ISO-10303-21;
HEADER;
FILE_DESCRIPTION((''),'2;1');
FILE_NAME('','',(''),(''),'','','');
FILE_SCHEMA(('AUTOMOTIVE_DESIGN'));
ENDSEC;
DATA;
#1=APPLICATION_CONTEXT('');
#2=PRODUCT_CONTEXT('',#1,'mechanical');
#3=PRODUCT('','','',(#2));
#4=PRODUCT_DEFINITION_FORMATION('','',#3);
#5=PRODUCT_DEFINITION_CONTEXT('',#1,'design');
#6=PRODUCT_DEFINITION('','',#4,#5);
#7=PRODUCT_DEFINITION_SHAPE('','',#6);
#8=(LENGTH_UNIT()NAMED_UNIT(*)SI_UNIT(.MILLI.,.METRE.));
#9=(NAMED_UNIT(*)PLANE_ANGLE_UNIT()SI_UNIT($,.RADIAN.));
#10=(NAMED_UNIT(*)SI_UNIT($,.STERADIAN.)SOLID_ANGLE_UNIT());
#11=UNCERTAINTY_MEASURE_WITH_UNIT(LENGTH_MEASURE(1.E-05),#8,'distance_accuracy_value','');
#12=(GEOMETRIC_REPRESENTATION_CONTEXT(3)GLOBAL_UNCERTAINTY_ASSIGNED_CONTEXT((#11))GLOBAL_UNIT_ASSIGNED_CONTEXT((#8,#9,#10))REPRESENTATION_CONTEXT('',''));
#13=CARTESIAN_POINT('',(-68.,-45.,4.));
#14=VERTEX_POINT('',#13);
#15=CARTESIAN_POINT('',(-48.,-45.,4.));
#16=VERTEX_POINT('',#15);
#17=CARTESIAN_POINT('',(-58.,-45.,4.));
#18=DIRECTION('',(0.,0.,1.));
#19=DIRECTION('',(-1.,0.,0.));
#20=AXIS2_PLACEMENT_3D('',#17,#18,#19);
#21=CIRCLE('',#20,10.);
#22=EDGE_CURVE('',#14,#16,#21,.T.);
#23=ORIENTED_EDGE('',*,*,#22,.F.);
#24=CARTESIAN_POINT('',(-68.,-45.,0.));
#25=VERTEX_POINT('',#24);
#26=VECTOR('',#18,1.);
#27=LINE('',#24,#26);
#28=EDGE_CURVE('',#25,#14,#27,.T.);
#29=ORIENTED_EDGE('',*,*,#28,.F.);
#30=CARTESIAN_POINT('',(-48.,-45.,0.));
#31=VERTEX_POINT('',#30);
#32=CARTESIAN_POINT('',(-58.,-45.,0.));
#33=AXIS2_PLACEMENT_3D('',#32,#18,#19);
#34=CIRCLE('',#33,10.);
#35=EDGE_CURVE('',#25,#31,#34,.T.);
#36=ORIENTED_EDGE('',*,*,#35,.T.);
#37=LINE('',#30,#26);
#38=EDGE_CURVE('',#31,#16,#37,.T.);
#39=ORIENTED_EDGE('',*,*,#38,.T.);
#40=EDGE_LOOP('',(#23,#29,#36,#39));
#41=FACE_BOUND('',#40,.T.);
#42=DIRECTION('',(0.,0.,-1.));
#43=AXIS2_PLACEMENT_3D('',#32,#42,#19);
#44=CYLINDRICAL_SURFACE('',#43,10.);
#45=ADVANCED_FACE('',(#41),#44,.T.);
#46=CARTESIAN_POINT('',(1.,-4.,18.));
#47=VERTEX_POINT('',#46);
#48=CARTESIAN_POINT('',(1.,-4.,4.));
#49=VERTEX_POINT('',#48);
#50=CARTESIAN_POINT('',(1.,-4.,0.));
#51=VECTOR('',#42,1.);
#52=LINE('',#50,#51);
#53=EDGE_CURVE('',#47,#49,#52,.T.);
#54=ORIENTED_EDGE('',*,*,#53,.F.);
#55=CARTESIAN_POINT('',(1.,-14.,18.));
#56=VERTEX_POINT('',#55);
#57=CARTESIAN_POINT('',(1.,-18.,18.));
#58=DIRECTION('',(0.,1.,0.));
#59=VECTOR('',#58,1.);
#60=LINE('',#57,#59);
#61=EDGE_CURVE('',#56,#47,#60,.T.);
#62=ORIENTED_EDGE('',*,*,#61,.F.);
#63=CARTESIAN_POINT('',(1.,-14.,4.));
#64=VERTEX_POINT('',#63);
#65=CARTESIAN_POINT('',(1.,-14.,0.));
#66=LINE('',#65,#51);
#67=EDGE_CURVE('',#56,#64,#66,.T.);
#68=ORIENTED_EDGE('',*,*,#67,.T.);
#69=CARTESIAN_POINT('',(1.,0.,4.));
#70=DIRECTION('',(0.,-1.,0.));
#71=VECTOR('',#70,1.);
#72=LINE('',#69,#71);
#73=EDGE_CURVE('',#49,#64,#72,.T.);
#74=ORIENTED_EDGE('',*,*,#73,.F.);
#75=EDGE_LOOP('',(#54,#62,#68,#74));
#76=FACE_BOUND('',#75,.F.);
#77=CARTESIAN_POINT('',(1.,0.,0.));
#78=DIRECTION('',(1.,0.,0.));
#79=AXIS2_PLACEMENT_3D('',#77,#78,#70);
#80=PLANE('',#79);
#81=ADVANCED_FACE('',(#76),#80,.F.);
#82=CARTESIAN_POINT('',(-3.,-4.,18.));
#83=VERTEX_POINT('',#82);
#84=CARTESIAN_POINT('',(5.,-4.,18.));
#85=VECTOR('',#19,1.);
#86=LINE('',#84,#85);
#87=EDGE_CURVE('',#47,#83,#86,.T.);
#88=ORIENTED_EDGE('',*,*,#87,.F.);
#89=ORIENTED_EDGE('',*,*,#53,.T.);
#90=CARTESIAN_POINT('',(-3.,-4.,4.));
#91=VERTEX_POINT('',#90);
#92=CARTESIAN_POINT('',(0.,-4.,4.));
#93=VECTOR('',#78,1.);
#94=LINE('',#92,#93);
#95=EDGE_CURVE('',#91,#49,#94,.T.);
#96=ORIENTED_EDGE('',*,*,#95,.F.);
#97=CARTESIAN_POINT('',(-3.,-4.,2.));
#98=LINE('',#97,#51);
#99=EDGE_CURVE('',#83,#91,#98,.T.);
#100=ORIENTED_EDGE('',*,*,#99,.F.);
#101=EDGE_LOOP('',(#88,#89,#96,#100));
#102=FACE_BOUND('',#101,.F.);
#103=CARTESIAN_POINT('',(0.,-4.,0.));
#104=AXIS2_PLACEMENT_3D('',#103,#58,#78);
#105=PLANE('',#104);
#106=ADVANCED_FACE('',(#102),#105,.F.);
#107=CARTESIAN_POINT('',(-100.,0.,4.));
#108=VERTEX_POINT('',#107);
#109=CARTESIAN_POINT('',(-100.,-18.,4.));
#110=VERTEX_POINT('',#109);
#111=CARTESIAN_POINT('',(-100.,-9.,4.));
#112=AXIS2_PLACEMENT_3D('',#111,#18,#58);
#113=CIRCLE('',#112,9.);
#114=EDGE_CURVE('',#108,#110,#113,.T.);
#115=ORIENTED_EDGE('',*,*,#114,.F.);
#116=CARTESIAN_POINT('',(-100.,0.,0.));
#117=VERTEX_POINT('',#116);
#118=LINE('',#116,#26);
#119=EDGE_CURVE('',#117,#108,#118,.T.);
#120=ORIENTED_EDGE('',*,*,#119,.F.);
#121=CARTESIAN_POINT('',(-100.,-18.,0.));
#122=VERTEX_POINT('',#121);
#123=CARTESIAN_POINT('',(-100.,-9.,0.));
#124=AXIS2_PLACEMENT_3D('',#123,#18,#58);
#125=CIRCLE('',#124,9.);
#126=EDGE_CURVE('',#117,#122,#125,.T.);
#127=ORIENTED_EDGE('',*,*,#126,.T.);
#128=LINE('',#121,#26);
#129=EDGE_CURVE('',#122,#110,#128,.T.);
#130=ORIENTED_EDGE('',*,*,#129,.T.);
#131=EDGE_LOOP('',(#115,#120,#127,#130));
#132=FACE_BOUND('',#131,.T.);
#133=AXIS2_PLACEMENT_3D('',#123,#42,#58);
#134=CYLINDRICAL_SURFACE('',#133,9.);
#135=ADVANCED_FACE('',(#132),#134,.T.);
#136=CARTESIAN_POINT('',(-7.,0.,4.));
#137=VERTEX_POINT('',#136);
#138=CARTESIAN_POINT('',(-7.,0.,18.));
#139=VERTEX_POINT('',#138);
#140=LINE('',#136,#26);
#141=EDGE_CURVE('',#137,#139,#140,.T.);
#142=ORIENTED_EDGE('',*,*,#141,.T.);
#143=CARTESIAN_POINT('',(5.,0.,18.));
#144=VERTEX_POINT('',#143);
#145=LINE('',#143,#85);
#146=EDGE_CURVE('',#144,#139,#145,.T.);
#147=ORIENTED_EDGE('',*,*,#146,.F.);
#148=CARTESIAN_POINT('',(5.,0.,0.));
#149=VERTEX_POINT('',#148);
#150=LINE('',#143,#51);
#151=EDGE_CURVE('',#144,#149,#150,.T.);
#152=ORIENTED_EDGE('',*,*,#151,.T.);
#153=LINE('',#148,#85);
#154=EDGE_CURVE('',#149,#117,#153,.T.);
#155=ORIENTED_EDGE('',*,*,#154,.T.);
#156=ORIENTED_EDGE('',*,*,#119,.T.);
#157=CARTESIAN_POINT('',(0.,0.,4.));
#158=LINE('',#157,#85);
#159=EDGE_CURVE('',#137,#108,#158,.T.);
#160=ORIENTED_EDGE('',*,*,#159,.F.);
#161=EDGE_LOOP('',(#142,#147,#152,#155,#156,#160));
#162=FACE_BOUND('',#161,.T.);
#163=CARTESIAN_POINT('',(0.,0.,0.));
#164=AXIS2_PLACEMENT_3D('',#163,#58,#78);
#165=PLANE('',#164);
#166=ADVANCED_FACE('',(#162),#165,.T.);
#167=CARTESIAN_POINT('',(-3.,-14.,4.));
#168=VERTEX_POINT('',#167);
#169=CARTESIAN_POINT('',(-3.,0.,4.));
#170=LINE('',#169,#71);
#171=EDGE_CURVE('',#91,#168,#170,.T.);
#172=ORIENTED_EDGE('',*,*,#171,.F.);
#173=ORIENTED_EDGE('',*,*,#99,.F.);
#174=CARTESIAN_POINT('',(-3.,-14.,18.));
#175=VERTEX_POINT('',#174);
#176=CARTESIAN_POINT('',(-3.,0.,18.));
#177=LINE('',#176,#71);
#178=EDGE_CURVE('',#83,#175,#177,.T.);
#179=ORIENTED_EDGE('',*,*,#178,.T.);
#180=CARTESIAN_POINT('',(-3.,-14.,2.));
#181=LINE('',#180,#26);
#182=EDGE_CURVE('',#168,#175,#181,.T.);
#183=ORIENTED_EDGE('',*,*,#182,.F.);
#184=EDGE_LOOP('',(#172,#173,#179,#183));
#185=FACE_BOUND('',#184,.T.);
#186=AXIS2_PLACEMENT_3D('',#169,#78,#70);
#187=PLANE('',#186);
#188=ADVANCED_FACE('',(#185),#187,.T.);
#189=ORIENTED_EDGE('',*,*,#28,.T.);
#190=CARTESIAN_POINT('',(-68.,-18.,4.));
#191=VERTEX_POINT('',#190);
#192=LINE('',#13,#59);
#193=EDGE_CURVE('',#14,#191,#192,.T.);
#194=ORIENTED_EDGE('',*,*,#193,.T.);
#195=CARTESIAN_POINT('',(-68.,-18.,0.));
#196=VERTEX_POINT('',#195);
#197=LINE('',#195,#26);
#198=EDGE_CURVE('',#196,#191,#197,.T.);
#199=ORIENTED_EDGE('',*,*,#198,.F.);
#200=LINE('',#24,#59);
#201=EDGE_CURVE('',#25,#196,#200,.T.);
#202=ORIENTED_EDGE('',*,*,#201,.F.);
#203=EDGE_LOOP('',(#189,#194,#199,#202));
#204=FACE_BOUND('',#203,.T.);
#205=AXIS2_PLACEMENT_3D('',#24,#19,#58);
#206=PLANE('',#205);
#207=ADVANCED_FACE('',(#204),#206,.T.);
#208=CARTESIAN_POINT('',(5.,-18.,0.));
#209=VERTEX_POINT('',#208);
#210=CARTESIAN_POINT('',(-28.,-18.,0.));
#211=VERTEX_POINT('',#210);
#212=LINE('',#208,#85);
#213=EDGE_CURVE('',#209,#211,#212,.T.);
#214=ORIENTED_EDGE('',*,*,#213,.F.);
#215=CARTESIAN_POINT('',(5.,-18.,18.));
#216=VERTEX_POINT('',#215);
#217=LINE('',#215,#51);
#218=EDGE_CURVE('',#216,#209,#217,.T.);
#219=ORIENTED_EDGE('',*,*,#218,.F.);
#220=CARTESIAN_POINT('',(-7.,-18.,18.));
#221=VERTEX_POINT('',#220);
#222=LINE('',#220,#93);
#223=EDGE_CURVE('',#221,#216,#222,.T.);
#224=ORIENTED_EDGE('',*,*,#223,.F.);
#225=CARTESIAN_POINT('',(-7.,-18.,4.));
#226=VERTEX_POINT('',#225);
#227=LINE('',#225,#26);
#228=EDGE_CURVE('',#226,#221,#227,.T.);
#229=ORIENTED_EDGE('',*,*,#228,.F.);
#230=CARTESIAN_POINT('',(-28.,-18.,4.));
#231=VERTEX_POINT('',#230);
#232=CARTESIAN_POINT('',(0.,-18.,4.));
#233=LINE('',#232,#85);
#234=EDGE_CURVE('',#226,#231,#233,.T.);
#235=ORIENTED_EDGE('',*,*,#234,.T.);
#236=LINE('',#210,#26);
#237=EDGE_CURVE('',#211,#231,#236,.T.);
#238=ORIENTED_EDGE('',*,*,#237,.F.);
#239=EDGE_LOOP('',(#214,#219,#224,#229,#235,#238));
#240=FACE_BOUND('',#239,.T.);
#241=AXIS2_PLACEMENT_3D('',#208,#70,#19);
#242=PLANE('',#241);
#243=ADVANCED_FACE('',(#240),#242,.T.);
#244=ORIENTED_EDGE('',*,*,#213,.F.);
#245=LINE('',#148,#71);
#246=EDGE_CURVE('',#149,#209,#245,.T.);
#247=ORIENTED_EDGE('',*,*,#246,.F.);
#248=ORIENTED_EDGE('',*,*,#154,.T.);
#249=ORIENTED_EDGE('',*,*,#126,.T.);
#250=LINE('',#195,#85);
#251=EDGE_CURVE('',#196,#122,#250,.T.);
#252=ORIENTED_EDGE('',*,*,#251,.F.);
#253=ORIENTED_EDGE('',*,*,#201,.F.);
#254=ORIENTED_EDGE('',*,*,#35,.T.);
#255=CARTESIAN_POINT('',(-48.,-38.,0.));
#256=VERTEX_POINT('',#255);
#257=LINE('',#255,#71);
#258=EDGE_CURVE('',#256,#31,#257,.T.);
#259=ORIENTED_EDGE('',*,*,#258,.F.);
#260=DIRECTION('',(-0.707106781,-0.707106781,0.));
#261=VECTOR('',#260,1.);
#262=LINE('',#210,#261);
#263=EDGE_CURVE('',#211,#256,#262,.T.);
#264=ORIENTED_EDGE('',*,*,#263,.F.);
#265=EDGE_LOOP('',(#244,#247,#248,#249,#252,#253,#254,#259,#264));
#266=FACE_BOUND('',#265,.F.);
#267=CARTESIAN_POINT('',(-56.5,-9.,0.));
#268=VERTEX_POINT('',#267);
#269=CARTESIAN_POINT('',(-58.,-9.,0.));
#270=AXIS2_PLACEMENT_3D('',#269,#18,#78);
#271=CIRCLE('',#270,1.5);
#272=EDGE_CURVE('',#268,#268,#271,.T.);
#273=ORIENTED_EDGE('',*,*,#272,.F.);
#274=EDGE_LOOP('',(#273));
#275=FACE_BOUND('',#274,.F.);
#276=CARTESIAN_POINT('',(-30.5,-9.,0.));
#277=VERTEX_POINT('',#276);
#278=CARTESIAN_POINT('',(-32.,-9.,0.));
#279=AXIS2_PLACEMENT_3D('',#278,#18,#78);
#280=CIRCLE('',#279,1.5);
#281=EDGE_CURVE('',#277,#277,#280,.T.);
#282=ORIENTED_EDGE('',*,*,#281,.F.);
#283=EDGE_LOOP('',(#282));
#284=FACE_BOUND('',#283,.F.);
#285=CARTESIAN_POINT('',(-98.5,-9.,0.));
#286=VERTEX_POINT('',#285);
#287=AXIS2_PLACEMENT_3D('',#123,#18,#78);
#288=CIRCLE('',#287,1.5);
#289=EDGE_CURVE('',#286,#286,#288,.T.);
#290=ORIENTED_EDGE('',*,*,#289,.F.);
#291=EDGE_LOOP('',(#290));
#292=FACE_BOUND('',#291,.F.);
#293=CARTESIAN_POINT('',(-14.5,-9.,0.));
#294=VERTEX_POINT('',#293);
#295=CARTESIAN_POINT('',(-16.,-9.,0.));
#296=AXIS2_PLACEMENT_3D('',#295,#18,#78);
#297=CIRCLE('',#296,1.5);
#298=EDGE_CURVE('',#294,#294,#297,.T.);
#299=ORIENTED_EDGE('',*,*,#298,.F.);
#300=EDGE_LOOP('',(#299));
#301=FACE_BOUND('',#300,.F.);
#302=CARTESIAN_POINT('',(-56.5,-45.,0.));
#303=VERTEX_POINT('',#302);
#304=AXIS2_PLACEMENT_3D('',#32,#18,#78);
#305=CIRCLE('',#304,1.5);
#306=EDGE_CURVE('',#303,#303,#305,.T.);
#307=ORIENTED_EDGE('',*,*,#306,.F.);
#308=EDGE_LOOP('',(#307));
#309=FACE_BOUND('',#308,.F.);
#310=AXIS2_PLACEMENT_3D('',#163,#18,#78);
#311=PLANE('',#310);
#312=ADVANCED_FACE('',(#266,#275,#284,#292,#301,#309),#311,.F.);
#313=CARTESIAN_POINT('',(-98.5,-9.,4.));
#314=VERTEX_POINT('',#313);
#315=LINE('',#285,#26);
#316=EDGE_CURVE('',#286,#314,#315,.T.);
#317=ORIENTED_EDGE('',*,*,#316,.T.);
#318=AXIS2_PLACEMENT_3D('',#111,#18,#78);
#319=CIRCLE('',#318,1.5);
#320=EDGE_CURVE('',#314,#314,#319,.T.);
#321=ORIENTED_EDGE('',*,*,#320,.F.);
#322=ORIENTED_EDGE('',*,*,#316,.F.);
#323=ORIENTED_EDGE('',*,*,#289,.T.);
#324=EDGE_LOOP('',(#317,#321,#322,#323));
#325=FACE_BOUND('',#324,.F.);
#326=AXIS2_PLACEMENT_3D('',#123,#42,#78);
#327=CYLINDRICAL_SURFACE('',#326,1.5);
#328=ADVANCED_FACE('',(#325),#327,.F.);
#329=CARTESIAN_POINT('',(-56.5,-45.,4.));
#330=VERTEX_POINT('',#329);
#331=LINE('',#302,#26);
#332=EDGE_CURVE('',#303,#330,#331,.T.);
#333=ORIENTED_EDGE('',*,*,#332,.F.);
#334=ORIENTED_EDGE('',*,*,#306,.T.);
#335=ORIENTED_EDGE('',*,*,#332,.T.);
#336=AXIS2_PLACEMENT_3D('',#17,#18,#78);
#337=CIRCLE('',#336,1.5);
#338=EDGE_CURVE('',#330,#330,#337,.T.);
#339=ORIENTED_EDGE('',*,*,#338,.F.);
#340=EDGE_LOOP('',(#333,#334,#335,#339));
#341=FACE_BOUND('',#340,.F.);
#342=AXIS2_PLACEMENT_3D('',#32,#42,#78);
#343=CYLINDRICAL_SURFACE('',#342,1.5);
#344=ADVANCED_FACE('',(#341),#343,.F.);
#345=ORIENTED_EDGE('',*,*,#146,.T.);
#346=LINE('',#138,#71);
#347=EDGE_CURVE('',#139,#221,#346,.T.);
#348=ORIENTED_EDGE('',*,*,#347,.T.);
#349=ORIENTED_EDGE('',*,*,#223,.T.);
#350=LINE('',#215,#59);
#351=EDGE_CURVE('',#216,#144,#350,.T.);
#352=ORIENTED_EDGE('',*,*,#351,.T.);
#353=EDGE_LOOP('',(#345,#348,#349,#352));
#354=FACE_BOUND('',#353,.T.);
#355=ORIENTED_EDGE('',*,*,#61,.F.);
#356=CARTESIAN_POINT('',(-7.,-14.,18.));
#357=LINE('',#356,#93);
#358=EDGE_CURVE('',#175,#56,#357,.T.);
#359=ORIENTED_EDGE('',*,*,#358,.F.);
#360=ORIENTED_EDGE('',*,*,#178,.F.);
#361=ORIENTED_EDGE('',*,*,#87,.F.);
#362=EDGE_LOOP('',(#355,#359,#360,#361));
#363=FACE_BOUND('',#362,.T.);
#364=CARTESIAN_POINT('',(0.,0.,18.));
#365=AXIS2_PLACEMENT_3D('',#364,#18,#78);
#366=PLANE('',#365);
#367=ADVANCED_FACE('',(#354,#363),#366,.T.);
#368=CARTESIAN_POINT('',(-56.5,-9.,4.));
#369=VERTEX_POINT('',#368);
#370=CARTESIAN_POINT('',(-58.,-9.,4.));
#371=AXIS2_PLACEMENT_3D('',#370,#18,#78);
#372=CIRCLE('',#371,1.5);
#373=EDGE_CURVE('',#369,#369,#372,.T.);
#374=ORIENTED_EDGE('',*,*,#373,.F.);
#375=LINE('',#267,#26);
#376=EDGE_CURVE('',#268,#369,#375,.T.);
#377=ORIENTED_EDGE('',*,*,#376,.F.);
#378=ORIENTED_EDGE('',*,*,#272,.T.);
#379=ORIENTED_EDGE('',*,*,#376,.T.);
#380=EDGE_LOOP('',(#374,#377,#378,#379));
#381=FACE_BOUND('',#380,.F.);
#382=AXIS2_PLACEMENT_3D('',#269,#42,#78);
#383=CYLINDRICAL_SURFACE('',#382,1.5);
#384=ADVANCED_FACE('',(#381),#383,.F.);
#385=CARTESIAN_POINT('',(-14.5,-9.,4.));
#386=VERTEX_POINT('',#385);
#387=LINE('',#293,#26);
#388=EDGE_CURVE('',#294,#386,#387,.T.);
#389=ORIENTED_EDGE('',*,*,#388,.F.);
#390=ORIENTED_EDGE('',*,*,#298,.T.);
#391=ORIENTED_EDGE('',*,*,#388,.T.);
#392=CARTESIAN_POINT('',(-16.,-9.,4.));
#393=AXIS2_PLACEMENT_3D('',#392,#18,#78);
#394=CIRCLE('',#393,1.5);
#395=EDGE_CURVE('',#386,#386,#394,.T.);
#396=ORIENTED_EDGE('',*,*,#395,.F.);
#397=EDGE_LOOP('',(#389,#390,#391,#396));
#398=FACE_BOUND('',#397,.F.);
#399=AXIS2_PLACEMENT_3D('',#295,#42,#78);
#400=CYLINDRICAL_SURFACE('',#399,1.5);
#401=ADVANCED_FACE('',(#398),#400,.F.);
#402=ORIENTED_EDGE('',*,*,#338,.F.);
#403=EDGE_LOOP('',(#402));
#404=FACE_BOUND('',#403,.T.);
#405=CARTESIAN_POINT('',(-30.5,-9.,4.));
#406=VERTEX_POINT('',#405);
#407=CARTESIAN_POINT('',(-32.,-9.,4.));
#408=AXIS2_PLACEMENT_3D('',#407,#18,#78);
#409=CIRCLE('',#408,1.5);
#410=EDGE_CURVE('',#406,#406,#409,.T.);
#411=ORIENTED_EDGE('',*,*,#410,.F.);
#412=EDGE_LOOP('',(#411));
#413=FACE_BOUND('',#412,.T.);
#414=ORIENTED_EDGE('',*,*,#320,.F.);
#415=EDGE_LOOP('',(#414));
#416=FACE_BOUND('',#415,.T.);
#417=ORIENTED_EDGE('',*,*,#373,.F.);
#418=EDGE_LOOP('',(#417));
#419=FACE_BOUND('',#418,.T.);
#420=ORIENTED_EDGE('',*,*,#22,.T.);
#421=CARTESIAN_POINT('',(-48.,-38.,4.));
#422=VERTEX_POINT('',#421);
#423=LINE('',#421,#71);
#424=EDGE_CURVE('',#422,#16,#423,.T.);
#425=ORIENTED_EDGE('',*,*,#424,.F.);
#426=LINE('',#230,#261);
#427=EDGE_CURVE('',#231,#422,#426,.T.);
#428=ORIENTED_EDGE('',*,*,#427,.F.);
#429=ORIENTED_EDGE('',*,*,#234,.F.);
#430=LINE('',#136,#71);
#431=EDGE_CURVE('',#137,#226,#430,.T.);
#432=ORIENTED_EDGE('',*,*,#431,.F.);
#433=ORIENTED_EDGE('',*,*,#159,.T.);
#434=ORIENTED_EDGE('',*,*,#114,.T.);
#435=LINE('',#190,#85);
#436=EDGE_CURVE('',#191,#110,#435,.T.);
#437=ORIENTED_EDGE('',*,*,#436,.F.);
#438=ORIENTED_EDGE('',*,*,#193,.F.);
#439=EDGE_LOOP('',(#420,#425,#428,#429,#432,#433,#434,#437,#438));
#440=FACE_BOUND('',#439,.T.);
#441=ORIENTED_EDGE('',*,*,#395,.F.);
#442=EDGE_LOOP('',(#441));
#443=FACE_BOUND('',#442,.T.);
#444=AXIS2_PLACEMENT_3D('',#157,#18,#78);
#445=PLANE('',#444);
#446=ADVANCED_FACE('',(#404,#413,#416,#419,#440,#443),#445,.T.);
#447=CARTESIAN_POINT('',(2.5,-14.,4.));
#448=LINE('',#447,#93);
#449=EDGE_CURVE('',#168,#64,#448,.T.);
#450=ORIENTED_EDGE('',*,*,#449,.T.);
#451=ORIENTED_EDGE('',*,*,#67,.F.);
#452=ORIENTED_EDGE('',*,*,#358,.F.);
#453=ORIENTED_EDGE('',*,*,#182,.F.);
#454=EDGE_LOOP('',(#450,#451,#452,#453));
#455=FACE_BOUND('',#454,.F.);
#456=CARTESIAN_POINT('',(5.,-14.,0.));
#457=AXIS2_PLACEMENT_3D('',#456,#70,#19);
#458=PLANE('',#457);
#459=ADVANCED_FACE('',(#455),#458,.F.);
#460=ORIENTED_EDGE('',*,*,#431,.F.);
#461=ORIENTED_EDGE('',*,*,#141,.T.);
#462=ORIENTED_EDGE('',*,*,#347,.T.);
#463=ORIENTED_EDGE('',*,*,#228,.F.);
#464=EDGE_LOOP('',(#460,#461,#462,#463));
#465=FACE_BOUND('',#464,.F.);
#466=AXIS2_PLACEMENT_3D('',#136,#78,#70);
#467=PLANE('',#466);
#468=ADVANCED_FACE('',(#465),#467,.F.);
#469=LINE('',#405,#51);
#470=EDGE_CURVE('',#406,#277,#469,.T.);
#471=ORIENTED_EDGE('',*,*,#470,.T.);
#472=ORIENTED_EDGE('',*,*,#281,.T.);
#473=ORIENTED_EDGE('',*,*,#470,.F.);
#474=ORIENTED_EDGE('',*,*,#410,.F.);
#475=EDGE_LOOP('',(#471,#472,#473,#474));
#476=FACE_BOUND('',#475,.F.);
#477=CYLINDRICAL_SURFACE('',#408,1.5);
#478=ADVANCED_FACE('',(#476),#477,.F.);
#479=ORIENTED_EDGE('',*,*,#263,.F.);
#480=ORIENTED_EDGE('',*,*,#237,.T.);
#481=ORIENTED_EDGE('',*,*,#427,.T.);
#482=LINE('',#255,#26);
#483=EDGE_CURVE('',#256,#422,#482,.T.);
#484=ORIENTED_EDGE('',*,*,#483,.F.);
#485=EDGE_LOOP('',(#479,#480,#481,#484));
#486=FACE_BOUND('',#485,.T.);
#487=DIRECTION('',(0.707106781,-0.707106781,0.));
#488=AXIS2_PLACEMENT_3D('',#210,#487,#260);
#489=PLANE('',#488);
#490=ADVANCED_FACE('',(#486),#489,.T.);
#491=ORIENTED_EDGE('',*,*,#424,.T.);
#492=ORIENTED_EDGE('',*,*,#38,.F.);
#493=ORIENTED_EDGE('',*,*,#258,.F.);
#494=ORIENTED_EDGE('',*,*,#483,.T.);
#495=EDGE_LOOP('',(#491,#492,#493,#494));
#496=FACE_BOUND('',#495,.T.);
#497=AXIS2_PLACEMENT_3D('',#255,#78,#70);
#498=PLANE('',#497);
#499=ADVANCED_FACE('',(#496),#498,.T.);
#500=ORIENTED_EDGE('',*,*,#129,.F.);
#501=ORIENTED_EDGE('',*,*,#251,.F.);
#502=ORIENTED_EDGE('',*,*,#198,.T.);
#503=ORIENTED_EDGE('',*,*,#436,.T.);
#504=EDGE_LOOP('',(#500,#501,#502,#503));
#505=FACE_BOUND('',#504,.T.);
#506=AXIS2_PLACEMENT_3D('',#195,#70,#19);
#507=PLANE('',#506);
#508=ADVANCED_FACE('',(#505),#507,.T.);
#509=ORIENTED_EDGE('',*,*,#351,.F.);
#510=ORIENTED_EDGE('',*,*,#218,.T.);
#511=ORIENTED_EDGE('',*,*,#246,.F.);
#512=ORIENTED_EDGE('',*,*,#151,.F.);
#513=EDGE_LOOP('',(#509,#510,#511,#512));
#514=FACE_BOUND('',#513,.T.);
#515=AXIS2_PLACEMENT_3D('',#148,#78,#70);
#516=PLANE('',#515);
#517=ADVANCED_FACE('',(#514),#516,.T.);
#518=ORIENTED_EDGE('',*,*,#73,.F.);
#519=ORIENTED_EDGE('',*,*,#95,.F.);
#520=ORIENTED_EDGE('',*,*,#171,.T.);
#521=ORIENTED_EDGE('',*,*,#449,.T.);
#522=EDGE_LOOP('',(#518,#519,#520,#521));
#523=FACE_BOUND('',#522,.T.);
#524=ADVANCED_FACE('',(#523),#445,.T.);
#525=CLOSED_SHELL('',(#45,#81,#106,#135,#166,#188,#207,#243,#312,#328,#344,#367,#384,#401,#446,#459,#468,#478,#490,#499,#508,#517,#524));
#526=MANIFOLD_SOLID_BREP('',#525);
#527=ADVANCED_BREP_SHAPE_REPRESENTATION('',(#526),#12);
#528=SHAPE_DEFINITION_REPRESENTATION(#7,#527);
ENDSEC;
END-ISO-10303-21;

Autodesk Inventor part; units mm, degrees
ref_plane "YZ Plane" through (0, 0, 0) normal (1, 0, 0) x (0, 1, 0)
ref_plane "XZ Plane" through (0, 0, 0) normal (0, 1, 0) x (-1, 0, 0)
ref_plane "XY Plane" through (0, 0, 0) normal (0, 0, 1) x (1, 0, 0)
sketch "Sketch1" plane through (0, 0, 0) normal (0, 0, 1) x (1, 0, 0)
  line L0 (0, 0) -> (-100, 0)
  circle A0 centre (-100, -9) radius 1.5
  circle A1 centre (-16, -9) radius 1.5
  circle A2 centre (-58, -9) radius 1.5
  circle A3 centre (-58, -45) radius 1.5
  arc A4 (-100, 0) -> (-100, -18) centre (-100, -9) ccw
  arc A5 (-68, -45) -> (-48, -45) centre (-58, -45) ccw
  line L1 (0, -18) -> (-28, -18)
  line L2 (-28, -18) -> (-48, -38)
  line L3 (-48, -38) -> (-48, -45)
  line L4 (-68, -45) -> (-68, -18)
  line L5 (-68, -18) -> (-100, -18)
  line L6 (0, 0) -> (5, 0)
  line L7 (5, 0) -> (5, -18)
  line L8 (5, -18) -> (0, -18)
  dimension "d0" = 100
  dimension "d1" = 3
  dimension "d2" = 3
  dimension "d3" = 3
  dimension "d4" = 3
  dimension "d5" = 18
  dimension "d6" = 20
  dimension "d7" = 18
  dimension "d8" = 28
  dimension "d9" = 32
  dimension "d10" = 27
  dimension "d11" = 20
  dimension "d12" = 20
  dimension "d13" = 16
  dimension "d14" = 42
  dimension "d15" = 42
  dimension "d16" = 9
  dimension "d17" = 9
  dimension "d69" = 5
  dimension "d70" = 18
  dimension "d71" = 90
extrude "Extrusion7" add sketch "Sketch1" along normal blind 4
sketch "Sketch6" plane through (0, 0, 4) normal (0, 0, 1) x (1, 0, 0)
  line L0 (5, 0) -> (-100, 0) projected
  line L1 (5, 0) -> (-7, 0)
  line L2 (-7, 0) -> (-7, -18)
  line L3 (-7, -18) -> (5, -18)
  line L4 (5, -18) -> (5, 0)
  point P0 (0, 0)
  dimension "d74" = 12
  dimension "d75" = 18
extrude "Extrusion8" add sketch "Sketch6" along normal blind 14
shell "Shell6" thickness 4 removed faces 1 at (-3, -12, 18)
sketch "Sketch7" plane through (0, 0, 4) normal (0, 0, 1) x (1, 0, 0)
  point P0 (0, 0)
sketch "Sketch8" plane through (0, 0, 4) normal (0, 0, 1) x (1, 0, 0)
  point P0 (0, 0)
sketch "Sketch9" plane through (0, 0, 4) normal (0, 0, 1) x (1, 0, 0)
  circle A0 centre (-32, -9) radius 1.5
  circle A1 centre (-16, -9) radius 1.5 projected
  line L0 (5, 0) -> (-7, 0) projected
  point P0 (0, 0)
  dimension "d79" = 3
  dimension "d80" = 16
  dimension "d81" = 9
extrude "Extrusion9" cut sketch "Sketch9" against normal through all contours A0
properties part number "Fall-Wk-3 - Mounting Bracket 1of3"
